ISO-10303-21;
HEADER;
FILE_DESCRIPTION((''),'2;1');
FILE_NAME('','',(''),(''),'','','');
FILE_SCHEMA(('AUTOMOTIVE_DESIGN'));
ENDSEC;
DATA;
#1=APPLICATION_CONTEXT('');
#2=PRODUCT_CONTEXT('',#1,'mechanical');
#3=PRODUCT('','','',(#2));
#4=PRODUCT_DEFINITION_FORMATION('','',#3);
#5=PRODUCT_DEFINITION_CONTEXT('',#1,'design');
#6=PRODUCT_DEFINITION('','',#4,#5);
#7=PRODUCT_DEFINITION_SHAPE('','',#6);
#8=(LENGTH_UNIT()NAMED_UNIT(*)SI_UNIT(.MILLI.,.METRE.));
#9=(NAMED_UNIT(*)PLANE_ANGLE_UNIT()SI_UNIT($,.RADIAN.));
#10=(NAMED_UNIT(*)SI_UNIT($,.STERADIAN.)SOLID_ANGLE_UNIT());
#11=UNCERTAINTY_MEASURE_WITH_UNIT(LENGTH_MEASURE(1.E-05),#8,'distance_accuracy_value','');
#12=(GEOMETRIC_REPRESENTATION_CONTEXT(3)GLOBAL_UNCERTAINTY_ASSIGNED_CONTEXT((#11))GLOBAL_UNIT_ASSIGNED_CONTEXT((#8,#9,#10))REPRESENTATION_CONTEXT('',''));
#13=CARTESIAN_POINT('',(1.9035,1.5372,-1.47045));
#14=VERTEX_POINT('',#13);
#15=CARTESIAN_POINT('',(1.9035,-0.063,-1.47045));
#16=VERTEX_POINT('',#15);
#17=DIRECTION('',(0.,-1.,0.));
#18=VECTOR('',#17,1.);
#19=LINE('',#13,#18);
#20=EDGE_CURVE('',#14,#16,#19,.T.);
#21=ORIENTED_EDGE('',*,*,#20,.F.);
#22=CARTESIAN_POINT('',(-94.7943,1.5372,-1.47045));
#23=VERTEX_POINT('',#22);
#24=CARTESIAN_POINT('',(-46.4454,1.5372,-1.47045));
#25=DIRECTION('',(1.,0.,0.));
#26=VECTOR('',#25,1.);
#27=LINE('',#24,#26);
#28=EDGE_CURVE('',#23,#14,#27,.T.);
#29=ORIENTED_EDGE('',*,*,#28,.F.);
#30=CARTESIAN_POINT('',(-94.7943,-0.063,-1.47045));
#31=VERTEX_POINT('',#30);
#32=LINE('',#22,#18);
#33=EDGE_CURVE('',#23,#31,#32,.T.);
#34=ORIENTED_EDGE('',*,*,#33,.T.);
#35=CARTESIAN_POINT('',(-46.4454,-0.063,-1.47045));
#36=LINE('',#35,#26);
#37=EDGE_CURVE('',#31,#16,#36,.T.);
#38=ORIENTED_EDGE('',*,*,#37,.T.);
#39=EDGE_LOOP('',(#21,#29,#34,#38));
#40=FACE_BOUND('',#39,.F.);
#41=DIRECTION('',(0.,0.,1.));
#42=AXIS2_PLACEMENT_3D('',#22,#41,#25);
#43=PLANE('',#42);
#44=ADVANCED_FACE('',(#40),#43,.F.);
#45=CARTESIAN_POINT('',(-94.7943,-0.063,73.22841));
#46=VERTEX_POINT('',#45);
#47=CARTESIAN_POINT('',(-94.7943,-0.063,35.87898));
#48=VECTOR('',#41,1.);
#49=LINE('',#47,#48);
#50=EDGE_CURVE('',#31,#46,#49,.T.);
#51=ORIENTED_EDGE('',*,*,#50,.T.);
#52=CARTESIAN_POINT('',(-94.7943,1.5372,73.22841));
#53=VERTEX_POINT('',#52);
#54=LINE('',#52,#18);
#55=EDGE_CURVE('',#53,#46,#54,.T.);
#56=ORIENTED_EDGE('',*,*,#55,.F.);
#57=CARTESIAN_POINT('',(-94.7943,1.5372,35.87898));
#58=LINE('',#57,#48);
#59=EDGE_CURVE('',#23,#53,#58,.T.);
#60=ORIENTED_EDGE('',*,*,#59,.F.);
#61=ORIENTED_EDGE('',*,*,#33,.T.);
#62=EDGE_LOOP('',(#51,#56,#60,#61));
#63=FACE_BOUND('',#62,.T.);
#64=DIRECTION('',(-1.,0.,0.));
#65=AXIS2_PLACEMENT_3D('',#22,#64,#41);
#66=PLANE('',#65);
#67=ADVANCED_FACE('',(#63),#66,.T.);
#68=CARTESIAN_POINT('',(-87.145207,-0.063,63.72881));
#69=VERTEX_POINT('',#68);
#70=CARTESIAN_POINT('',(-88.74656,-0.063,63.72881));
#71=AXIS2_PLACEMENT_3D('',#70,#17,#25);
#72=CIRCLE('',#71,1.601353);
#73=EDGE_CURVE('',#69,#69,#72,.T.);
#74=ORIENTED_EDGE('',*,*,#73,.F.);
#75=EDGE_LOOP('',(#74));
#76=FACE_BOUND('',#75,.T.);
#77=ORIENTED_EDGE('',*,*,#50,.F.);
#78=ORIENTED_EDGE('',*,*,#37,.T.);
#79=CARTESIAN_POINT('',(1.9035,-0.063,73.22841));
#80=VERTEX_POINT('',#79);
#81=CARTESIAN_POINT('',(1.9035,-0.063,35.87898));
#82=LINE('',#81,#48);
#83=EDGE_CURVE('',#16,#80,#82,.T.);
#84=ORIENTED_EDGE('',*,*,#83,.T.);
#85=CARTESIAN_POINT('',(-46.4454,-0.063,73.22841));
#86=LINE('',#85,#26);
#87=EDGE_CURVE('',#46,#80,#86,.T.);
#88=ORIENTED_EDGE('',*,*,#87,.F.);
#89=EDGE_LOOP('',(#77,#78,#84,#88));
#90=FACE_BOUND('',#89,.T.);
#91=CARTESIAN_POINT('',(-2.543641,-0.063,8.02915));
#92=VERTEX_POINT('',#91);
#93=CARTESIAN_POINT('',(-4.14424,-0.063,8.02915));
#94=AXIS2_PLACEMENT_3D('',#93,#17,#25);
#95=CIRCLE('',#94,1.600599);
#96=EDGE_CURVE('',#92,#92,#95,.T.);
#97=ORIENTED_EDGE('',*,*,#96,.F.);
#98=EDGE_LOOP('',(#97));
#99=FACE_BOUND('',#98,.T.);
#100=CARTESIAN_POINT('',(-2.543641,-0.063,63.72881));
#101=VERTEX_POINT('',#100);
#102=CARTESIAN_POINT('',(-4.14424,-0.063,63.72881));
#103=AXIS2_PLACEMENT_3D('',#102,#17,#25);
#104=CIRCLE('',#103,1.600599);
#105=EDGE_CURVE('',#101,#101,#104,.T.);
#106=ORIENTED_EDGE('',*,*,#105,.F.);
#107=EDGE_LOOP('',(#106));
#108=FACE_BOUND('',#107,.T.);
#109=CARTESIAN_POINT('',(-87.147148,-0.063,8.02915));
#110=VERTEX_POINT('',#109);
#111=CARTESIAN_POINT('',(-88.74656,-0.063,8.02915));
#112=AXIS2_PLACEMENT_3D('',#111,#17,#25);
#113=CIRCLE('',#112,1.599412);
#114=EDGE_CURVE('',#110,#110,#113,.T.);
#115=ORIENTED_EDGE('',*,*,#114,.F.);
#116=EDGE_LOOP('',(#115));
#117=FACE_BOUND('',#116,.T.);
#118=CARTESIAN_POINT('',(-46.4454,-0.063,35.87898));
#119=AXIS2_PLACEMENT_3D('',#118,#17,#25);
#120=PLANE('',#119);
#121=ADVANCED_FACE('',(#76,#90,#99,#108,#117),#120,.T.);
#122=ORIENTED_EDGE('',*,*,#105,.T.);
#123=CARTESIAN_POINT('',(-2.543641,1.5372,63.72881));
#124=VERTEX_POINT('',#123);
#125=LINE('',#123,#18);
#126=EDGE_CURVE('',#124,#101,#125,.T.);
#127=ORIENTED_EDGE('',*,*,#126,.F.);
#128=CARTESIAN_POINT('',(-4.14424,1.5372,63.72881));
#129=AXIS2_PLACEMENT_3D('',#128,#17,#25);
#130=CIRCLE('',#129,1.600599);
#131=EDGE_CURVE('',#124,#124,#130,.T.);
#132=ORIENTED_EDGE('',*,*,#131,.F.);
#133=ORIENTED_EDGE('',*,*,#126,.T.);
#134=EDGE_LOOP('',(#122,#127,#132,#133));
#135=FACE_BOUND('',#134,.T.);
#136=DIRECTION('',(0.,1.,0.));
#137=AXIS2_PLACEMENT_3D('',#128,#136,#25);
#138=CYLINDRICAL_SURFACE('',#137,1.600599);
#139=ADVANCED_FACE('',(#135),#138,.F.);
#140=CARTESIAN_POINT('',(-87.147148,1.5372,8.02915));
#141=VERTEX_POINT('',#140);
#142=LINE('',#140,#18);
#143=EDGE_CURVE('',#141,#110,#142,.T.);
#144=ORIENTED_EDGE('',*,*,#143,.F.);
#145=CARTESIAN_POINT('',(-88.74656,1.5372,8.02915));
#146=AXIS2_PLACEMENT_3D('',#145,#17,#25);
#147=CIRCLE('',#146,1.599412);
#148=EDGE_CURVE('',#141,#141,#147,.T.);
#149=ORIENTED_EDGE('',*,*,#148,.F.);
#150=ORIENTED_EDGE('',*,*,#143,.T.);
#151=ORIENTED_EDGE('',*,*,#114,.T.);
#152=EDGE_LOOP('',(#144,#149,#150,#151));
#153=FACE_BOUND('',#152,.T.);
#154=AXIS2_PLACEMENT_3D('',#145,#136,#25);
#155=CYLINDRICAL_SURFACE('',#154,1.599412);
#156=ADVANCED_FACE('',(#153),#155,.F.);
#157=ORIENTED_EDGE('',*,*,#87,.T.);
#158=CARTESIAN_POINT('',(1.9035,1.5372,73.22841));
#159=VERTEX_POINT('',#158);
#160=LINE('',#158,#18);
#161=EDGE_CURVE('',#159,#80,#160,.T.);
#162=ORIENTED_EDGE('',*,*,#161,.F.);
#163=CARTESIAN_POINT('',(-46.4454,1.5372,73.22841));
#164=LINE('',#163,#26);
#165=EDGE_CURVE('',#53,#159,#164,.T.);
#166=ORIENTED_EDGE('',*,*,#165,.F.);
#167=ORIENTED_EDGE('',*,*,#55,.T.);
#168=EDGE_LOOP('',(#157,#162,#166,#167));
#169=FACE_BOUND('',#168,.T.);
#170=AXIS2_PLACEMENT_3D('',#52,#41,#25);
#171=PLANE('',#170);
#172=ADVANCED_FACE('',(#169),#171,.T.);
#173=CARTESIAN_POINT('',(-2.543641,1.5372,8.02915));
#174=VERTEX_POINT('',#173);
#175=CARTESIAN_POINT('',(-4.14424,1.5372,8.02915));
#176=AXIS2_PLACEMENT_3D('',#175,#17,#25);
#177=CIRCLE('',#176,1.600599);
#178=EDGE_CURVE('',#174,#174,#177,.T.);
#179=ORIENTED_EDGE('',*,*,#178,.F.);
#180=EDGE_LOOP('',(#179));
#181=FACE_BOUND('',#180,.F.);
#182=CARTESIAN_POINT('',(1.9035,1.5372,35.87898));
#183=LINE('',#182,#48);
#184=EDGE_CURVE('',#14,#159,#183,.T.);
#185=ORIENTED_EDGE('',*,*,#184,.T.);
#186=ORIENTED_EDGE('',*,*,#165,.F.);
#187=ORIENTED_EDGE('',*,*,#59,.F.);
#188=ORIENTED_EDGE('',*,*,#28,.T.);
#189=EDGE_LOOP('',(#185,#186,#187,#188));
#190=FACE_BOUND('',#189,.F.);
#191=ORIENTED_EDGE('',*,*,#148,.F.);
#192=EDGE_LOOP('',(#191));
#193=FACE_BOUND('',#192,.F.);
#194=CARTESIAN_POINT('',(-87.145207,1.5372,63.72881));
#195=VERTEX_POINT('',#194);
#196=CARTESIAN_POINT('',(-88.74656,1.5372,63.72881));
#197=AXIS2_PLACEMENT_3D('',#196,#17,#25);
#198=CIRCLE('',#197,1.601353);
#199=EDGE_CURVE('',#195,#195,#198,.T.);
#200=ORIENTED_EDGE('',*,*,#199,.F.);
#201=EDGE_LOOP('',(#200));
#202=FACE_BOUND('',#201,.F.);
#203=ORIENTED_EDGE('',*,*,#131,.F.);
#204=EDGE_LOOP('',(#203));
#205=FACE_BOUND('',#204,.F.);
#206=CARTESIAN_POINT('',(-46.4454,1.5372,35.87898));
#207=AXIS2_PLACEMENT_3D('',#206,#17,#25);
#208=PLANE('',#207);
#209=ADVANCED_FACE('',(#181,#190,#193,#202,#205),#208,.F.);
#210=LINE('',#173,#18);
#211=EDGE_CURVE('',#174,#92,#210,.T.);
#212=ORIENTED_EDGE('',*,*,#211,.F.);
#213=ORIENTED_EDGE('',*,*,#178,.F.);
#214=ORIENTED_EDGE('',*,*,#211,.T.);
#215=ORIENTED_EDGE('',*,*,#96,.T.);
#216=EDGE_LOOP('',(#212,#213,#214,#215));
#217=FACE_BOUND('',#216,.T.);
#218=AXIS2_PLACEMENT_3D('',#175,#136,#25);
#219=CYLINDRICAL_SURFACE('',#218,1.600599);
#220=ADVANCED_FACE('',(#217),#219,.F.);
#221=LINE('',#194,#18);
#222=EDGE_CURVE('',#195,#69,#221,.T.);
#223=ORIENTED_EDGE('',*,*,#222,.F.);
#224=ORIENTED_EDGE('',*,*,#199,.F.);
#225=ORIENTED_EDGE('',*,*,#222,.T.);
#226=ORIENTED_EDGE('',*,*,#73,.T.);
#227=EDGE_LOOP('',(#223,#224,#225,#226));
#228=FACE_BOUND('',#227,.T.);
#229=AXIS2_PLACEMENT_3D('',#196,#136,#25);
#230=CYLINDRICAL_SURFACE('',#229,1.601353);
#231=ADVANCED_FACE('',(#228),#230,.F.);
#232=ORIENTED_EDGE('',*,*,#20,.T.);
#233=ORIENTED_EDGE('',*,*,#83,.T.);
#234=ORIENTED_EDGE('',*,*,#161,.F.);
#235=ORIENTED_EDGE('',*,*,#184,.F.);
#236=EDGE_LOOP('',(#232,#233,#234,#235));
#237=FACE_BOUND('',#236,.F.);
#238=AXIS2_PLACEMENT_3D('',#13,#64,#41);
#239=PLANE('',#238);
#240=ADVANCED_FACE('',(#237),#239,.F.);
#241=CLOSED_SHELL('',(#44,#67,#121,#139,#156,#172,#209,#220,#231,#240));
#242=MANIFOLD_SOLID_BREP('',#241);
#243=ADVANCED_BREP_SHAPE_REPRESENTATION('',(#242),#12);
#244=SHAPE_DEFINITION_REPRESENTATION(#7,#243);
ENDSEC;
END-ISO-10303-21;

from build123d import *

# Parameters (mm, degrees)
F1_W     = 3.807
F1_H     = 2.9409
F1_R     = 0.0629689606
F1_R_2   = 0.0630157123
F1_R_3   = 0.0630453805
F2_DEPTH = 0.063
F3_SCALE = 25.4


with BuildPart() as f2:
    # F1 (on Front) → F2 (new body)
    with BuildSketch(Plane.XZ):
        Rectangle(F1_W, F1_H)
        with Locations((-1.6654, -1.09645)):
            Circle(F1_R, mode=Mode.SUBTRACT)
        with Locations((1.6654, -1.09645)):
            Circle(F1_R_2, mode=Mode.SUBTRACT)
        with Locations((-1.6654, 1.09645)):
            Circle(F1_R_3, mode=Mode.SUBTRACT)
        with Locations((1.6654, 1.09645)):
            Circle(F1_R_2, mode=Mode.SUBTRACT)
    extrude(amount=F2_DEPTH)


with BuildPart() as f2_1:
    # F3: moved
    add(f2.part.scale(F3_SCALE).moved(Location((-46.4454, 1.5372, 35.87898))))


solid = f2_1.part
